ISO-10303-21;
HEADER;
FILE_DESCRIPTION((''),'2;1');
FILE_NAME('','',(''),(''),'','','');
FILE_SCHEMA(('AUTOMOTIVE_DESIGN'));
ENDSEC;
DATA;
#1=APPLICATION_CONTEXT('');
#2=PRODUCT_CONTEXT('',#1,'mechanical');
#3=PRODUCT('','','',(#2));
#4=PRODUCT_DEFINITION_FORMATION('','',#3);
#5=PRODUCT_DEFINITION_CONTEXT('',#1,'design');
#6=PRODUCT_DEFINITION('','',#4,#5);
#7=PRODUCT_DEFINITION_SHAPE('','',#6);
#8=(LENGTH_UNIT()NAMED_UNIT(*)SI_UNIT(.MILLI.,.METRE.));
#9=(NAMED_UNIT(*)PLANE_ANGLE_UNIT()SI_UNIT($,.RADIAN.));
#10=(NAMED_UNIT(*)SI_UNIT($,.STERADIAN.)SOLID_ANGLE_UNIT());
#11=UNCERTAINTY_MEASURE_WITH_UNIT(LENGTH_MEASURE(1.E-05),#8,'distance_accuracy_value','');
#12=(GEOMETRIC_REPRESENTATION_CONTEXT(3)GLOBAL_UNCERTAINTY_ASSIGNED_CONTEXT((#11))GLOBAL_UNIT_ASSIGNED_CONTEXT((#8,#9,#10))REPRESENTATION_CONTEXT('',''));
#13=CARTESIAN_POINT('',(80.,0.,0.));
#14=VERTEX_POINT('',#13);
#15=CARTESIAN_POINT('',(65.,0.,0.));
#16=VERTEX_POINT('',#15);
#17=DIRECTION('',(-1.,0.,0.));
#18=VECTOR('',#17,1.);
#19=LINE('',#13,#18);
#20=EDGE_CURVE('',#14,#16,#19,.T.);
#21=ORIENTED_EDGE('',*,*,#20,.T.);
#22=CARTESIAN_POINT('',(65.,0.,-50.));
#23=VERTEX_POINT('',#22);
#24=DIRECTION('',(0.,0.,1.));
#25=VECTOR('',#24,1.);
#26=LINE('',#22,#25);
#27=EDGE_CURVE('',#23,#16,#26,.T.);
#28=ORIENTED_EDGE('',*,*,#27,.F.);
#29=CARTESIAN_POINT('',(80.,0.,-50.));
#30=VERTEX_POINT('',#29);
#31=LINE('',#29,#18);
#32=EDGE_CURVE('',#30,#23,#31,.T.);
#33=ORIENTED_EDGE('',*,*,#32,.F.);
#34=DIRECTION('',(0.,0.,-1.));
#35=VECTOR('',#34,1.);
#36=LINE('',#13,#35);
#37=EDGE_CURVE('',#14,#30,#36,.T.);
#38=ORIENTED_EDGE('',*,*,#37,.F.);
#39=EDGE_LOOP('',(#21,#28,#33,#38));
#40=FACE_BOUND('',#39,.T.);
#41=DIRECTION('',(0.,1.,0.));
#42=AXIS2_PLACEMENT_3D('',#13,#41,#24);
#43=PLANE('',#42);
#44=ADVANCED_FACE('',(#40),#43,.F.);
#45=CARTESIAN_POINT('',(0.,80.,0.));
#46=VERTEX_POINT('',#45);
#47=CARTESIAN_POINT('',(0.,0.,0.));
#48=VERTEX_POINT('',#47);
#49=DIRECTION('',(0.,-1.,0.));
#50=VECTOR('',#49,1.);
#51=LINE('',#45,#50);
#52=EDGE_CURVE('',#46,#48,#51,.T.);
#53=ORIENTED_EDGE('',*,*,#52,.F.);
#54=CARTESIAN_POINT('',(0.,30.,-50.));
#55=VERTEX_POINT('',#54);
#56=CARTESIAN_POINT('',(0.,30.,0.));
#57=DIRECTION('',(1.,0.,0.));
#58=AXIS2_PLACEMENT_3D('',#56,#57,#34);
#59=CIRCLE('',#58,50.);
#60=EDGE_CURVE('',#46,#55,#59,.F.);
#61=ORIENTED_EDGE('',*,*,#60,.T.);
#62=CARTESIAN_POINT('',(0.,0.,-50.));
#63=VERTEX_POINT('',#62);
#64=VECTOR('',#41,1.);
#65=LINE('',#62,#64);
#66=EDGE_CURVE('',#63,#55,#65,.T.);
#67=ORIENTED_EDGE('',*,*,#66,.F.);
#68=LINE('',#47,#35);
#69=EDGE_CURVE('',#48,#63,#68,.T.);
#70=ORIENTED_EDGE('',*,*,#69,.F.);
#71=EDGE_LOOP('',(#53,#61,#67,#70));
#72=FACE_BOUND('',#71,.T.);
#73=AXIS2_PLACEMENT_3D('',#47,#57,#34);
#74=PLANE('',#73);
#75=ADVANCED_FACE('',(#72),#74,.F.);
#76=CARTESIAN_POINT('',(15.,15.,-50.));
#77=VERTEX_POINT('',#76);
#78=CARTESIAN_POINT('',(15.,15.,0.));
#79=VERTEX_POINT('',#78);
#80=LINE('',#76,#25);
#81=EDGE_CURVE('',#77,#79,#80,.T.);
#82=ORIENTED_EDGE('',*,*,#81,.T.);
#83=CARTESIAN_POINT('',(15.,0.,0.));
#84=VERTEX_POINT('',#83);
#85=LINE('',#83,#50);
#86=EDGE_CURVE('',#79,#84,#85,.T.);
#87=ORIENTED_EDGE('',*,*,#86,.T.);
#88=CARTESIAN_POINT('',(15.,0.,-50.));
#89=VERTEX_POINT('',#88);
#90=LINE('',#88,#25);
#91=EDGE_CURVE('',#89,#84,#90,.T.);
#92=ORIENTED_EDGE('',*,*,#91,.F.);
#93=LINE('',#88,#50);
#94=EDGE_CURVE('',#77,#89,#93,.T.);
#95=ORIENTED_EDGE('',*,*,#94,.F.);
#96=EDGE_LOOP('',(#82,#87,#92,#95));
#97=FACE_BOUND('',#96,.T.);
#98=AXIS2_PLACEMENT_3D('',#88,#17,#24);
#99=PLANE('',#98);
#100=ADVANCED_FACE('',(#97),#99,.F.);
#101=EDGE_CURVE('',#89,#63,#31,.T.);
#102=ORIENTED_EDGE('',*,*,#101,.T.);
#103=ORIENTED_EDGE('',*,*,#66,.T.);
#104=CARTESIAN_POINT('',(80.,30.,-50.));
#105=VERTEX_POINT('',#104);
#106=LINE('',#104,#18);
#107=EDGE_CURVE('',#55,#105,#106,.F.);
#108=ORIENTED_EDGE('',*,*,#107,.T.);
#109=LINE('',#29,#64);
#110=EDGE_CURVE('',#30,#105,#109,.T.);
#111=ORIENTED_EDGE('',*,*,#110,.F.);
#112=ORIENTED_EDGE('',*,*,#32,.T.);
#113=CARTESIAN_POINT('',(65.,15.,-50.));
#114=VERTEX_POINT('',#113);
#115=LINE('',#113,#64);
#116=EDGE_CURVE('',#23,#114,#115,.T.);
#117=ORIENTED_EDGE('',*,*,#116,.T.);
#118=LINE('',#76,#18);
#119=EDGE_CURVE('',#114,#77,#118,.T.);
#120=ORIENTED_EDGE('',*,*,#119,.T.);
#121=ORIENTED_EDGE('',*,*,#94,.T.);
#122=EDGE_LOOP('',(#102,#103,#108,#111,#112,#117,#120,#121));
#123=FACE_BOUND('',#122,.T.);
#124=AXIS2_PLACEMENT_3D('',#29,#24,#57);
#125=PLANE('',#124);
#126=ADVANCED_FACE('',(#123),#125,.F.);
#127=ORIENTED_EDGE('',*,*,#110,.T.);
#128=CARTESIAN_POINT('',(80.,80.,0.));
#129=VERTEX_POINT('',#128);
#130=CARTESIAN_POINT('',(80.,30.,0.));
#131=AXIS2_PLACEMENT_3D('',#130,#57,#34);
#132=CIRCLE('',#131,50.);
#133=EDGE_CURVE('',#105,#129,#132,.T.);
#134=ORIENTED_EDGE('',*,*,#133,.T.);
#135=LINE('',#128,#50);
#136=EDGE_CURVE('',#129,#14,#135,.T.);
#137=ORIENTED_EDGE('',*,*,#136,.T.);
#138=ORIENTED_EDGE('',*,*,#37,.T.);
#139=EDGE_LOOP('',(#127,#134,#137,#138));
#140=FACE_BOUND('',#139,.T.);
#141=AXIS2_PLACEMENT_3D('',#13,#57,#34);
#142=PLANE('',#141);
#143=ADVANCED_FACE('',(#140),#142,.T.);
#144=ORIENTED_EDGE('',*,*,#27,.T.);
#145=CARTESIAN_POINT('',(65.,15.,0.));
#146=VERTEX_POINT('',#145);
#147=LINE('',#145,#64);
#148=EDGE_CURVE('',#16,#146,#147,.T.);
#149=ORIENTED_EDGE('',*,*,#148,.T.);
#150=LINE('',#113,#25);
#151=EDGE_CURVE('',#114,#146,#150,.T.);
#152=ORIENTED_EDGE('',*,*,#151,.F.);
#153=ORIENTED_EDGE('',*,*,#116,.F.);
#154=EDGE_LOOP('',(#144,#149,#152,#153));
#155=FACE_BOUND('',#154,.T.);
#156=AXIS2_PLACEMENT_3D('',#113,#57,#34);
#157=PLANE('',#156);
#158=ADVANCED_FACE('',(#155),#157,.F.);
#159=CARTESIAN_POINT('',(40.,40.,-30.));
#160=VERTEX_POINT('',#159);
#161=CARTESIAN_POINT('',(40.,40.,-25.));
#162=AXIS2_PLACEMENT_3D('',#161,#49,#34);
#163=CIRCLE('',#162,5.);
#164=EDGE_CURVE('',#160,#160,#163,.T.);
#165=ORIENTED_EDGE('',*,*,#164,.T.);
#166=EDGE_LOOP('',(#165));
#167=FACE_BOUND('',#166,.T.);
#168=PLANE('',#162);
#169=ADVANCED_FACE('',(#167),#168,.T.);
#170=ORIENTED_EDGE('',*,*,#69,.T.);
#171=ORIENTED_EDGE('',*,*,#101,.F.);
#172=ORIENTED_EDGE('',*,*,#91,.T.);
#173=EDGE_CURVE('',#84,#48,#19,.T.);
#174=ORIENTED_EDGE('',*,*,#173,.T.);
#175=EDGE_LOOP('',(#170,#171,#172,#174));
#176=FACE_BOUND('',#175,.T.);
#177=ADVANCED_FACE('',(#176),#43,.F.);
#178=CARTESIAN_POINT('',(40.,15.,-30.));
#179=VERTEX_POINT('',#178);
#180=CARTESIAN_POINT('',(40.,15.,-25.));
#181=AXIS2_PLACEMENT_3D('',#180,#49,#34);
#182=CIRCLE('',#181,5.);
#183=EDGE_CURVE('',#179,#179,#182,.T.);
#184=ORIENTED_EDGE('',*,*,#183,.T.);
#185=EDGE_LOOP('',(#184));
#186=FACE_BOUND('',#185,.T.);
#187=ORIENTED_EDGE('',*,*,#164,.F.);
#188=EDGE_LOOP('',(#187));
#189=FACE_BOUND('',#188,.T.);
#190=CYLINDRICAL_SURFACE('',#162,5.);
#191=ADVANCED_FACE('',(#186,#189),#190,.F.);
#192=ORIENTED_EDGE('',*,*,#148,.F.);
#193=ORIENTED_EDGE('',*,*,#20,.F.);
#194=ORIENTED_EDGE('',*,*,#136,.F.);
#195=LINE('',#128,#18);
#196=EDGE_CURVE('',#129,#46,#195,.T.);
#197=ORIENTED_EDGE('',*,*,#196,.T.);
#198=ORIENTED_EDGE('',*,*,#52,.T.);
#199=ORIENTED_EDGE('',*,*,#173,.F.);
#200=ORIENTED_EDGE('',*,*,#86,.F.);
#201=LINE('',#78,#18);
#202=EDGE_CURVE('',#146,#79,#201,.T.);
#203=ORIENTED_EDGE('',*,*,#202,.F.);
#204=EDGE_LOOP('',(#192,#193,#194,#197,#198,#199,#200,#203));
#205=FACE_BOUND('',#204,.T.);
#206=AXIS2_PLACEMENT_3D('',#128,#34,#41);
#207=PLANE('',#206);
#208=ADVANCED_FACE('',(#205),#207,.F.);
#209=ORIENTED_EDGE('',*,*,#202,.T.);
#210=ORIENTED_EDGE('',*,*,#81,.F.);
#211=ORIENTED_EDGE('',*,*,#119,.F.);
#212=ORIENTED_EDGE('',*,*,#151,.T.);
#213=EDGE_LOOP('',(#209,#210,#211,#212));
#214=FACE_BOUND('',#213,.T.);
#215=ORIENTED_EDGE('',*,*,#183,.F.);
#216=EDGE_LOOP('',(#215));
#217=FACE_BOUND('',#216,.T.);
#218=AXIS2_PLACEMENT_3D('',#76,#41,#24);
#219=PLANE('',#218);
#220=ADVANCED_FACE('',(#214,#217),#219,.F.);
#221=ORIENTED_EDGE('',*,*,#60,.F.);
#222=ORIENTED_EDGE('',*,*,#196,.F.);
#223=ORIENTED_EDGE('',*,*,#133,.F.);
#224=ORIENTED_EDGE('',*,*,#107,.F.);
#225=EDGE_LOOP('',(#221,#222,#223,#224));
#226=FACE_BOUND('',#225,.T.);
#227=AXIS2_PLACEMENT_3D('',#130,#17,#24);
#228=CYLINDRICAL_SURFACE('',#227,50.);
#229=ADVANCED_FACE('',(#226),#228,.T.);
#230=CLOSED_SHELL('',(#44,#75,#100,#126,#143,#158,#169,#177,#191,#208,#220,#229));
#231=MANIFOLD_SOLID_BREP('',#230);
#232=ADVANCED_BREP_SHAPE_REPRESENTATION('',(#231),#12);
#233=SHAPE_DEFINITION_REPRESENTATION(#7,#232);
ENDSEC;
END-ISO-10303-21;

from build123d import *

# Parameters (mm, degrees)
SKETCH1_W           = 50
SKETCH1_H           = 80
BOSS_EXTRUDE1_DEPTH = 80
SKETCH4_W           = 50
SKETCH4_H           = 15
CUT_EXTRUDE2_DEPTH  = 124.693168769
FILLET1_R           = 50
SKETCH5_R           = 5
CUT_EXTRUDE3_DEPTH  = 25


with BuildPart() as part:
    # Sketch1 → Boss-Extrude1 (new body)
    with BuildSketch(Plane(origin=(0, 0, 0), x_dir=(0, 0, -1), z_dir=(1, 0, 0))):
        with Locations((25, 40)):
            Rectangle(SKETCH1_W, SKETCH1_H)
    extrude(amount=BOSS_EXTRUDE1_DEPTH)

    # Sketch4 → Cut-Extrude2 (cut, through all)
    with BuildSketch(Plane.XY):
        with Locations((40, 7.5)):
            Rectangle(SKETCH4_W, SKETCH4_H)
    extrude(amount=-CUT_EXTRUDE2_DEPTH, mode=Mode.SUBTRACT)

    # Fillet1
    fillet1_edges = [part.edges().sort_by_distance(p)[0] for p in [
        (40, 80, -50),
    ]]
    fillet(fillet1_edges, radius=FILLET1_R - 0.0001)  # a hair under: the kernel refuses the full size

    # Sketch5 → Cut-Extrude3 (cut)
    with BuildSketch(Plane.XZ.offset(-15)):
        with Locations(Location((40, -25, 0), (0, 0, 270))):
            Circle(SKETCH5_R)
    extrude(amount=-CUT_EXTRUDE3_DEPTH, mode=Mode.SUBTRACT)


solid = part.part
